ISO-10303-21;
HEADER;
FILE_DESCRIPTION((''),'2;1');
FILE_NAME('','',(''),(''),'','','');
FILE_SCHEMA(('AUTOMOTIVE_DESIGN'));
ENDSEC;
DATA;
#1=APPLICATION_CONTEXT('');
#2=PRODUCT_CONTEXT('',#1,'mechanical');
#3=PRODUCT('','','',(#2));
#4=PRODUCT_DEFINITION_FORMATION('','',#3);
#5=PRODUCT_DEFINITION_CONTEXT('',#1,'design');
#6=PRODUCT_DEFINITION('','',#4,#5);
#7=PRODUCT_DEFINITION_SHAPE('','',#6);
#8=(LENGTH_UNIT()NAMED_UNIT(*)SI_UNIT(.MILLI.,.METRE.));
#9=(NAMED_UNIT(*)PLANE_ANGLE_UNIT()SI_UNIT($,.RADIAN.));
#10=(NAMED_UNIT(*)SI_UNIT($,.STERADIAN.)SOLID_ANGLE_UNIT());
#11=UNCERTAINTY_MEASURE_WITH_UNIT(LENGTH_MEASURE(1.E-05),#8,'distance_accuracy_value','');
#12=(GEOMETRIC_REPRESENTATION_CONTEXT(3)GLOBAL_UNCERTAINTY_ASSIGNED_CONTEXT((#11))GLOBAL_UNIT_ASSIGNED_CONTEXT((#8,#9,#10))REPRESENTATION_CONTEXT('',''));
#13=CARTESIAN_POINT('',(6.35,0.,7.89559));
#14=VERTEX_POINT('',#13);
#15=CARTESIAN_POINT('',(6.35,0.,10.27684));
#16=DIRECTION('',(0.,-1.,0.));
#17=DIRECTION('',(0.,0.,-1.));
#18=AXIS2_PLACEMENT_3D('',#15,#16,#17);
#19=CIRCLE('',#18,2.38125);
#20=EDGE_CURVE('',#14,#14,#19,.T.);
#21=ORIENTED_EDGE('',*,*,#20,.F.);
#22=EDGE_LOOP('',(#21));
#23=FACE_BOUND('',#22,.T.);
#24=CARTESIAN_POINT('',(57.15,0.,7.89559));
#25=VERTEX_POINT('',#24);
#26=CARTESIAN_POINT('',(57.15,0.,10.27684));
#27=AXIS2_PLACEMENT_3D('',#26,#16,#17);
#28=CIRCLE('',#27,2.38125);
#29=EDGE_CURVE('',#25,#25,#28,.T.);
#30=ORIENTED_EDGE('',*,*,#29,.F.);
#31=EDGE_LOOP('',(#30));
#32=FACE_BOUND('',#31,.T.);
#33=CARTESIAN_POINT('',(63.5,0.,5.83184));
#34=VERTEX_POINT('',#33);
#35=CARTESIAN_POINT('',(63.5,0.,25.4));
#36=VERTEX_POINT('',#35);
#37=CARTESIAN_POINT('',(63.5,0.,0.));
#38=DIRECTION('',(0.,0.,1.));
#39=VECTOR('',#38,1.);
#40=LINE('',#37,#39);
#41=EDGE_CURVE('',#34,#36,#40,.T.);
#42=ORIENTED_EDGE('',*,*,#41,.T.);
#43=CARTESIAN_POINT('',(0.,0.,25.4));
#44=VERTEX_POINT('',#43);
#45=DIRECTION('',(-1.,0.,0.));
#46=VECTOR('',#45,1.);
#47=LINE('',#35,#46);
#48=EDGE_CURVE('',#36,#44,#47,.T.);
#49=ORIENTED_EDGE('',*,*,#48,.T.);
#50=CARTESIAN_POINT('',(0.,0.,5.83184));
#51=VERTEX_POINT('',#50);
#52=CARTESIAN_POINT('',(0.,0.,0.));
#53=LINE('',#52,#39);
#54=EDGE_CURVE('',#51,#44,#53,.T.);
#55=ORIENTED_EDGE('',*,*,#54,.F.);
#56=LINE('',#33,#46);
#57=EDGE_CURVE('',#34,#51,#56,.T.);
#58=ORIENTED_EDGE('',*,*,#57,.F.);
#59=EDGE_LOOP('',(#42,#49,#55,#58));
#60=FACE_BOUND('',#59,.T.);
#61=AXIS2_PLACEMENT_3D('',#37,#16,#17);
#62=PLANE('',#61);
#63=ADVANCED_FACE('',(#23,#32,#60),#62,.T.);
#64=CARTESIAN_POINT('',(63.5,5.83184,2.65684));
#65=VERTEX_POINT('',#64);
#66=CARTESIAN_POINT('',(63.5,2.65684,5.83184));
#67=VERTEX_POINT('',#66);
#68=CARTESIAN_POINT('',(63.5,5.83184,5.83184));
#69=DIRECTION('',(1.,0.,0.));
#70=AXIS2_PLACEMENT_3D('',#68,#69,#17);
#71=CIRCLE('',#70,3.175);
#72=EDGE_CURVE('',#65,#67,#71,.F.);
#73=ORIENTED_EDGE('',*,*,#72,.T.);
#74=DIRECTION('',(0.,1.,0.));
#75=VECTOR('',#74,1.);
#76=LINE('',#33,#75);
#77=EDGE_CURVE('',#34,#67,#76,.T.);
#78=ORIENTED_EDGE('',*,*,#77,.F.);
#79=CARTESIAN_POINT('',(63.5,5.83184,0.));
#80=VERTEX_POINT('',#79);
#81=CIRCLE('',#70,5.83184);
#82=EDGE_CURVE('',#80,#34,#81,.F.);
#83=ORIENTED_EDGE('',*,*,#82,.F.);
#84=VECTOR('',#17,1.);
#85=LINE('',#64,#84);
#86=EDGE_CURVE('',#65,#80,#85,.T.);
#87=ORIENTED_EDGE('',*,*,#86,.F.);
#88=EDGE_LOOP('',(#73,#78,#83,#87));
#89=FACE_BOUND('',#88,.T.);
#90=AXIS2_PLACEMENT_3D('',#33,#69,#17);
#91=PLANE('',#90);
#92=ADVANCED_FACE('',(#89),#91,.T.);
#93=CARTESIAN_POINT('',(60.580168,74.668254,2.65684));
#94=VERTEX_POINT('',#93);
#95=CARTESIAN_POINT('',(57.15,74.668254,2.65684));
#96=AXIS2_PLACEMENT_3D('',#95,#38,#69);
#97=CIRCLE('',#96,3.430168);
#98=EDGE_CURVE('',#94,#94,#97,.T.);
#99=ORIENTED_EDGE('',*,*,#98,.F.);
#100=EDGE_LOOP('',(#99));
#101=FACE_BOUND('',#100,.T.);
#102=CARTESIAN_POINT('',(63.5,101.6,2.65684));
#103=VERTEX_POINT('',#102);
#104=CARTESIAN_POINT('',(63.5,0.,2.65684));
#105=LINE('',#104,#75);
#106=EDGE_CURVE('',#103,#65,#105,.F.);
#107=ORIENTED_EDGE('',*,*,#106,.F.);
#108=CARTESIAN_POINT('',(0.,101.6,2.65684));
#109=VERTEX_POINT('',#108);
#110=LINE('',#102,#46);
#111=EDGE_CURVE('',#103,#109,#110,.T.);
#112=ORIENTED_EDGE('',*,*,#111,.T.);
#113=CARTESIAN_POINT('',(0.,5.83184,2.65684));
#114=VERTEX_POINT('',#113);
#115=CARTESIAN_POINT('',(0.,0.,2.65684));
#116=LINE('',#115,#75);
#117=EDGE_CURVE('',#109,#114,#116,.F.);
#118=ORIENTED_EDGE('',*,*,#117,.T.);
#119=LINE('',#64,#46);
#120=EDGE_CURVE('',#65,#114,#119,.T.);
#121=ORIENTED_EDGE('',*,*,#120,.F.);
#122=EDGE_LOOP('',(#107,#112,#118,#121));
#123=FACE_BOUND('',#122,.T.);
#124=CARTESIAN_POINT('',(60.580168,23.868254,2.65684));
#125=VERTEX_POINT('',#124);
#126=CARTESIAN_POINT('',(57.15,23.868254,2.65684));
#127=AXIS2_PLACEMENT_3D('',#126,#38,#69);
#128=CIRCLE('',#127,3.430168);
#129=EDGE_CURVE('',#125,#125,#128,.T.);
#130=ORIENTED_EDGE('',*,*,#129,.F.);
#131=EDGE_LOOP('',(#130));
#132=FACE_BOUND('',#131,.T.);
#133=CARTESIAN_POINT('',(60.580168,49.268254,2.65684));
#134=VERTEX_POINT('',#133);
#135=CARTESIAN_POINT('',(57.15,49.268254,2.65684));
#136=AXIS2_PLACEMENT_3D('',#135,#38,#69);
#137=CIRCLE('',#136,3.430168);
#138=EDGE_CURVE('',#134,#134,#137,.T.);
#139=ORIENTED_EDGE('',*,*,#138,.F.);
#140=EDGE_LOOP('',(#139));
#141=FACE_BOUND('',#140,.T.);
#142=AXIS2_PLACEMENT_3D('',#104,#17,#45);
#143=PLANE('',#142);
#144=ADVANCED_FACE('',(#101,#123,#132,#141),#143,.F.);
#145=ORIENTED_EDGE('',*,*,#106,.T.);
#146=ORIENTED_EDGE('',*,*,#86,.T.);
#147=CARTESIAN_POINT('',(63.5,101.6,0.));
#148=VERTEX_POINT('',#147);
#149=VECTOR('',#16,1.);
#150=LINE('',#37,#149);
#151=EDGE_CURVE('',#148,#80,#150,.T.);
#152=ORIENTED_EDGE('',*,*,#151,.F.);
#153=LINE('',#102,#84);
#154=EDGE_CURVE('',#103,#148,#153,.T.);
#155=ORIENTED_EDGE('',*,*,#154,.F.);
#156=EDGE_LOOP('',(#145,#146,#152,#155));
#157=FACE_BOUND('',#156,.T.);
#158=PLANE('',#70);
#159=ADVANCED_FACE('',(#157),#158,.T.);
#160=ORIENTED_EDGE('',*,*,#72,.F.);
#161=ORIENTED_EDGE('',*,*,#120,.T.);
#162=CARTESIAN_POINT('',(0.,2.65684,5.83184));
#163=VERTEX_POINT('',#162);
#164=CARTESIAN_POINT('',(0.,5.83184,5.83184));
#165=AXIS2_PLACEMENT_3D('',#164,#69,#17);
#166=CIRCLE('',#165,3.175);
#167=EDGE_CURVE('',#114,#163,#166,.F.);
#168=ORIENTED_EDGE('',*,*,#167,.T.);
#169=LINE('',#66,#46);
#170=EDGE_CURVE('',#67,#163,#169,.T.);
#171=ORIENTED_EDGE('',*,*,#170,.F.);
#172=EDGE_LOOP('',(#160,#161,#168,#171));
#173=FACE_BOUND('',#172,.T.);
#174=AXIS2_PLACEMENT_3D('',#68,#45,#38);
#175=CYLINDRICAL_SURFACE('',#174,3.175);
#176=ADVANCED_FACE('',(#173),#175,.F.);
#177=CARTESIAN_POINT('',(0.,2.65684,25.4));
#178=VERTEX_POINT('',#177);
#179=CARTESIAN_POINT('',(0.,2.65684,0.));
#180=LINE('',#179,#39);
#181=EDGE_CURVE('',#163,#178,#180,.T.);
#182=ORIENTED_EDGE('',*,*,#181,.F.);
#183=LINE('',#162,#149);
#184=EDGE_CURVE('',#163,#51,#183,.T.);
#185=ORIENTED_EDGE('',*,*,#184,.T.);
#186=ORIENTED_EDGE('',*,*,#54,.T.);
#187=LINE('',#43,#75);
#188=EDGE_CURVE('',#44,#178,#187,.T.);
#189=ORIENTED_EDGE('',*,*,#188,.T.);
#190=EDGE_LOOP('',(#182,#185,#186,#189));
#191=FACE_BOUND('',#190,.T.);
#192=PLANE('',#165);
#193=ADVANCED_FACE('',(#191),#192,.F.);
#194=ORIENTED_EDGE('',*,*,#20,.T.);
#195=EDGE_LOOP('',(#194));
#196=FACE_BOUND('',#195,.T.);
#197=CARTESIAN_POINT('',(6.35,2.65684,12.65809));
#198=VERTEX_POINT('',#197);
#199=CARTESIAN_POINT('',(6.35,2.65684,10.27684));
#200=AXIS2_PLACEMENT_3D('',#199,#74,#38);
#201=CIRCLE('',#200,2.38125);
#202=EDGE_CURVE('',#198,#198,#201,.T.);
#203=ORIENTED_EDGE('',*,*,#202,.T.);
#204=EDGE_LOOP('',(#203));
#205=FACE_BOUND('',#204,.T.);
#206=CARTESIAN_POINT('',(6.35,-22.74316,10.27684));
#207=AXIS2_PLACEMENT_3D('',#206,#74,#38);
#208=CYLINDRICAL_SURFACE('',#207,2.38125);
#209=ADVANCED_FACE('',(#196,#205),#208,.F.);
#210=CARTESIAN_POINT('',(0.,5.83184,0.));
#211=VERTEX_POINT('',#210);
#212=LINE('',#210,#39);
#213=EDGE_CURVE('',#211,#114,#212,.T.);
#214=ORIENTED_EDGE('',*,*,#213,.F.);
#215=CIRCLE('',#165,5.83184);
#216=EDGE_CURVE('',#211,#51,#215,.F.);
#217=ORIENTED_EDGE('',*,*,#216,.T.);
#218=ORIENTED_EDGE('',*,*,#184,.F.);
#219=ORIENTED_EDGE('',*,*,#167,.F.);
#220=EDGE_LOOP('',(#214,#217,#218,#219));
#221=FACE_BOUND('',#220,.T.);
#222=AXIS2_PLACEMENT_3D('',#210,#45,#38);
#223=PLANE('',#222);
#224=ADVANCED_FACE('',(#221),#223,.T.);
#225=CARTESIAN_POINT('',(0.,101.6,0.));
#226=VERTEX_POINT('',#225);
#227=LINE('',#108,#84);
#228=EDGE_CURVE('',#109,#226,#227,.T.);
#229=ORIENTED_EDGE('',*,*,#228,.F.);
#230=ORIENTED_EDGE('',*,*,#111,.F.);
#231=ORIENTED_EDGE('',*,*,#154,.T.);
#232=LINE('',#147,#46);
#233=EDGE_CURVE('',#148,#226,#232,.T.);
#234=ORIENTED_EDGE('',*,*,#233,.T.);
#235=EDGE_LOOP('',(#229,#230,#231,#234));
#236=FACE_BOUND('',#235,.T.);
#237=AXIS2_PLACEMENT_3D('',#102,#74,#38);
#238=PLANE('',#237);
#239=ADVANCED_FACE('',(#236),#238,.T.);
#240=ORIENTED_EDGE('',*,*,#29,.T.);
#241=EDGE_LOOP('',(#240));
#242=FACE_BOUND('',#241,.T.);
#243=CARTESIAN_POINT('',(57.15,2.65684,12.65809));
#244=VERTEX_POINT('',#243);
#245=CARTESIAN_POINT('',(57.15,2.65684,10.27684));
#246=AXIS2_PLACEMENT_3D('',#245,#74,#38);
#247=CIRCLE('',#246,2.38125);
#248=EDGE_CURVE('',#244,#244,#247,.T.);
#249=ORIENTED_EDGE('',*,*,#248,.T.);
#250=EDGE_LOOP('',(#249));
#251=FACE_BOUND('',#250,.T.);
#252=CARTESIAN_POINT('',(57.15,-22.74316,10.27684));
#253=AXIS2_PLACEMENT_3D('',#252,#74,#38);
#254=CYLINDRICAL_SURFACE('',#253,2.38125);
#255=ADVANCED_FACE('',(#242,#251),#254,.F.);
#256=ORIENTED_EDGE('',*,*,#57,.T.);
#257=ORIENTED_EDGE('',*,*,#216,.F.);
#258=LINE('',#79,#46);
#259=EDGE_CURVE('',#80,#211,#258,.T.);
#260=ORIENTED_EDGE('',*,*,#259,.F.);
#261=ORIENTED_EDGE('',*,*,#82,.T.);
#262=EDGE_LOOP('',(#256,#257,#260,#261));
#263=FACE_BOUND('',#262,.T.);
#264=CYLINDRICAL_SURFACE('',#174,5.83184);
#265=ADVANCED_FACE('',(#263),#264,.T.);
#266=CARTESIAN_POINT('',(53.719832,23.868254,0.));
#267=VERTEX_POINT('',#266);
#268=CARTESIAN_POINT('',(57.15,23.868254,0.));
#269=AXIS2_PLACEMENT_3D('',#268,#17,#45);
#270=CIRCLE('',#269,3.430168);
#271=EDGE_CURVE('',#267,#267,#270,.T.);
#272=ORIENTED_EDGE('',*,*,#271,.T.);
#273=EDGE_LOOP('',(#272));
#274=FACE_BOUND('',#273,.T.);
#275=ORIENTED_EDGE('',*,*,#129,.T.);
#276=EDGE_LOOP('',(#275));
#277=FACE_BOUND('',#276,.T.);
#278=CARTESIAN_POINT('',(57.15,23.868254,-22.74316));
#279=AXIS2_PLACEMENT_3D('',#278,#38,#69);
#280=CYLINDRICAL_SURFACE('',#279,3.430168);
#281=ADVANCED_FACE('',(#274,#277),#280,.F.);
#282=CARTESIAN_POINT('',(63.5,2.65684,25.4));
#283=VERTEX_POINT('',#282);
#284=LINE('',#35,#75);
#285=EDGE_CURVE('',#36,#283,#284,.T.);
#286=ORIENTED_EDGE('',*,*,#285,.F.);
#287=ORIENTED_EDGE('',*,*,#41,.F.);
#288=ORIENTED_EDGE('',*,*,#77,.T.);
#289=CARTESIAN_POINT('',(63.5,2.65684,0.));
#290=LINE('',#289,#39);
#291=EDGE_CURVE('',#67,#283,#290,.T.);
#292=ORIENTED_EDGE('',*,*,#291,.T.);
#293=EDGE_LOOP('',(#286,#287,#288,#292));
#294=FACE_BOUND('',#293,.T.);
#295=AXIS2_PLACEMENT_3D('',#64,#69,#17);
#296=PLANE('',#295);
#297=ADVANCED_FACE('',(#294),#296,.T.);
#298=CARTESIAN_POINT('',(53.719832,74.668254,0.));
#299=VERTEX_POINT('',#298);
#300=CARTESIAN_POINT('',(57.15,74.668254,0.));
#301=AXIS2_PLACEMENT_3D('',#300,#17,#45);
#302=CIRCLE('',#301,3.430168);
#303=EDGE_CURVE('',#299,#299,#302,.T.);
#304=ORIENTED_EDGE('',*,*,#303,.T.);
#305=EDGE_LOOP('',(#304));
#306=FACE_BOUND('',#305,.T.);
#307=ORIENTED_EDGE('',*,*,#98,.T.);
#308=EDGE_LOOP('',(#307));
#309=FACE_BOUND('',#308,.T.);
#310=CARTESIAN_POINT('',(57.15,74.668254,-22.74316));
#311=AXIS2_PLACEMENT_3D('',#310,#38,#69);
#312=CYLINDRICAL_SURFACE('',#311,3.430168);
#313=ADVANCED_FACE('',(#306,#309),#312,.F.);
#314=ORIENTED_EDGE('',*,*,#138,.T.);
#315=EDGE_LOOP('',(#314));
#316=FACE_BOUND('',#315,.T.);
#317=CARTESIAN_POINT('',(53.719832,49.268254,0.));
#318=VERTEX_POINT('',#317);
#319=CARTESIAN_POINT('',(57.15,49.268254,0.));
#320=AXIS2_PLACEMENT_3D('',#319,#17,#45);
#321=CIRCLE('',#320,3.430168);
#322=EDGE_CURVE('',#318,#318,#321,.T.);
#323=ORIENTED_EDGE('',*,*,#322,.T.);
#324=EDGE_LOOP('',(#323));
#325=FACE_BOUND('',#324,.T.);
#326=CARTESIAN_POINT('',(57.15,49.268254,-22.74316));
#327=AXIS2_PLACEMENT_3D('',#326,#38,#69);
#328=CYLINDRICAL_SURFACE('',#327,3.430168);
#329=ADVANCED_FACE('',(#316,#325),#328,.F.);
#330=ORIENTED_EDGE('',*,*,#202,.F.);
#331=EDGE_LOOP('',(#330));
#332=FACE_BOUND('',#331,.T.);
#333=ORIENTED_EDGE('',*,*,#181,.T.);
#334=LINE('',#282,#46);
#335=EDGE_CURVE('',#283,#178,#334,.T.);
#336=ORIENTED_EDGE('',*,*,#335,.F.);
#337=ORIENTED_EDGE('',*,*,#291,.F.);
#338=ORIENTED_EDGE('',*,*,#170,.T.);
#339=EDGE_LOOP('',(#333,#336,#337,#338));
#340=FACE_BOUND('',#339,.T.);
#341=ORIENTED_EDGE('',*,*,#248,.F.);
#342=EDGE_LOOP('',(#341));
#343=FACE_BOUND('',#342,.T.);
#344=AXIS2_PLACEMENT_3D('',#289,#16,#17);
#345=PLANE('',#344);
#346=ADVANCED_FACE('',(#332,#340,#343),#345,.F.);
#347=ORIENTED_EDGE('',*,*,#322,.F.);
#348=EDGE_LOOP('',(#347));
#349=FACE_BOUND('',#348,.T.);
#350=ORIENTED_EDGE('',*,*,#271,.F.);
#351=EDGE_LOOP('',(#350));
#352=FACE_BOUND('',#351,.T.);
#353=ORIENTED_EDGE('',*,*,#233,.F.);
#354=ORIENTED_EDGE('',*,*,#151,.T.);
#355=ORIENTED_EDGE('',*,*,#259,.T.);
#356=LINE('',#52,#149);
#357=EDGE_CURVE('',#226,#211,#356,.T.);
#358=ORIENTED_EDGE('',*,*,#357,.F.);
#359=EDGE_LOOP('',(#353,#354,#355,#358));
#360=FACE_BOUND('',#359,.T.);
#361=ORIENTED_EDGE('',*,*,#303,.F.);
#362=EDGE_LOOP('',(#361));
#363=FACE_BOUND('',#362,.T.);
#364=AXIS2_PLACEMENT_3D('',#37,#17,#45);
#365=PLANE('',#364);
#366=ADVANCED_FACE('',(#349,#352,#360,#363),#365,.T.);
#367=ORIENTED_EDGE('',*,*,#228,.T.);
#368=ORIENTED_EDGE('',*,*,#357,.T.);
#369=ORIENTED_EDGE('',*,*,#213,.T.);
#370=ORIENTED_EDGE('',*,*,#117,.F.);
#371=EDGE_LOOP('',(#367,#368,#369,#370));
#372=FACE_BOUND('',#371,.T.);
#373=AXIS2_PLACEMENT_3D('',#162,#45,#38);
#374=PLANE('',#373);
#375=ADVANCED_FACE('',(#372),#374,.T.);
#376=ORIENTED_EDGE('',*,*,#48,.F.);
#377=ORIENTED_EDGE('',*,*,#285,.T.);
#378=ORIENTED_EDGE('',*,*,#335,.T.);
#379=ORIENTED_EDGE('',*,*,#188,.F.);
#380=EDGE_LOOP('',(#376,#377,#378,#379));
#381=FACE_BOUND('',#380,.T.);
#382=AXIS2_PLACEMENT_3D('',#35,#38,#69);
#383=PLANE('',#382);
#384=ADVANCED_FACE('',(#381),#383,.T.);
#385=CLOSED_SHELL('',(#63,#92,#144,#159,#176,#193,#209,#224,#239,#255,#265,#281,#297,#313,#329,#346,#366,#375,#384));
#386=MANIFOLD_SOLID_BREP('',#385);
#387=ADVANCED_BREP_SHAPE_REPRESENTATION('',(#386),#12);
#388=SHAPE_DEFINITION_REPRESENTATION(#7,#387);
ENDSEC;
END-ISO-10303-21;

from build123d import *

# Parameters (mm, degrees)
BASE_FLANGE1_DEPTH = 63.5
SKETCH6_R          = 2.38125
CUT_EXTRUDE1_DEPTH = 25.4
SKETCH7_R          = 3.430168193
CUT_EXTRUDE2_DEPTH = 25.4


# Sheet-metal steps are written as plain solids
with BuildPart() as part:
    # Sketch1 → Base-Flange1 (new body)
    with BuildSketch(Plane(origin=(0, 0, 0), x_dir=(0, 0, -1), z_dir=(1, 0, 0))):
        with BuildLine():
            Line((-25.4, 0), (-5.83184, 0))
            ThreePointArc((-5.83184, 0), (-1.708106389, 1.708106389), (0, 5.83184))
            Line((0, 5.83184), (0, 101.6))
            Line((0, 101.6), (-2.65684, 101.6))
            Line((-2.65684, 101.6), (-2.65684, 5.83184))
            ThreePointArc((-2.65684, 5.83184), (-3.58677597, 3.58677597), (-5.83184, 2.65684))
            Line((-5.83184, 2.65684), (-25.4, 2.65684))
            Line((-25.4, 2.65684), (-25.4, 0))
        make_face()
    extrude(amount=BASE_FLANGE1_DEPTH)

    # Sketch6 → Cut-Extrude1 (cut)
    with BuildSketch(Plane(origin=(0, 2.65684, 0), x_dir=(1, 0, 0), z_dir=(0, 1, 0))):
        with Locations(Location((6.35, -10.27684, 0), (0, 0, 270))):
            Circle(SKETCH6_R)
        with Locations(Location((57.15, -10.27684, 0), (0, 0, 270))):
            Circle(SKETCH6_R)
    extrude(amount=-CUT_EXTRUDE1_DEPTH, mode=Mode.SUBTRACT)

    # Sketch7 → Cut-Extrude2 (cut)
    with BuildSketch(Plane.XY.offset(2.65684)):
        with Locations((57.15, 49.268253676)):
            Circle(SKETCH7_R)
        with Locations((57.15, 74.668253676)):
            Circle(SKETCH7_R)
        with Locations((57.15, 23.868253676)):
            Circle(SKETCH7_R)
    extrude(amount=-CUT_EXTRUDE2_DEPTH, mode=Mode.SUBTRACT)


solid = part.part
